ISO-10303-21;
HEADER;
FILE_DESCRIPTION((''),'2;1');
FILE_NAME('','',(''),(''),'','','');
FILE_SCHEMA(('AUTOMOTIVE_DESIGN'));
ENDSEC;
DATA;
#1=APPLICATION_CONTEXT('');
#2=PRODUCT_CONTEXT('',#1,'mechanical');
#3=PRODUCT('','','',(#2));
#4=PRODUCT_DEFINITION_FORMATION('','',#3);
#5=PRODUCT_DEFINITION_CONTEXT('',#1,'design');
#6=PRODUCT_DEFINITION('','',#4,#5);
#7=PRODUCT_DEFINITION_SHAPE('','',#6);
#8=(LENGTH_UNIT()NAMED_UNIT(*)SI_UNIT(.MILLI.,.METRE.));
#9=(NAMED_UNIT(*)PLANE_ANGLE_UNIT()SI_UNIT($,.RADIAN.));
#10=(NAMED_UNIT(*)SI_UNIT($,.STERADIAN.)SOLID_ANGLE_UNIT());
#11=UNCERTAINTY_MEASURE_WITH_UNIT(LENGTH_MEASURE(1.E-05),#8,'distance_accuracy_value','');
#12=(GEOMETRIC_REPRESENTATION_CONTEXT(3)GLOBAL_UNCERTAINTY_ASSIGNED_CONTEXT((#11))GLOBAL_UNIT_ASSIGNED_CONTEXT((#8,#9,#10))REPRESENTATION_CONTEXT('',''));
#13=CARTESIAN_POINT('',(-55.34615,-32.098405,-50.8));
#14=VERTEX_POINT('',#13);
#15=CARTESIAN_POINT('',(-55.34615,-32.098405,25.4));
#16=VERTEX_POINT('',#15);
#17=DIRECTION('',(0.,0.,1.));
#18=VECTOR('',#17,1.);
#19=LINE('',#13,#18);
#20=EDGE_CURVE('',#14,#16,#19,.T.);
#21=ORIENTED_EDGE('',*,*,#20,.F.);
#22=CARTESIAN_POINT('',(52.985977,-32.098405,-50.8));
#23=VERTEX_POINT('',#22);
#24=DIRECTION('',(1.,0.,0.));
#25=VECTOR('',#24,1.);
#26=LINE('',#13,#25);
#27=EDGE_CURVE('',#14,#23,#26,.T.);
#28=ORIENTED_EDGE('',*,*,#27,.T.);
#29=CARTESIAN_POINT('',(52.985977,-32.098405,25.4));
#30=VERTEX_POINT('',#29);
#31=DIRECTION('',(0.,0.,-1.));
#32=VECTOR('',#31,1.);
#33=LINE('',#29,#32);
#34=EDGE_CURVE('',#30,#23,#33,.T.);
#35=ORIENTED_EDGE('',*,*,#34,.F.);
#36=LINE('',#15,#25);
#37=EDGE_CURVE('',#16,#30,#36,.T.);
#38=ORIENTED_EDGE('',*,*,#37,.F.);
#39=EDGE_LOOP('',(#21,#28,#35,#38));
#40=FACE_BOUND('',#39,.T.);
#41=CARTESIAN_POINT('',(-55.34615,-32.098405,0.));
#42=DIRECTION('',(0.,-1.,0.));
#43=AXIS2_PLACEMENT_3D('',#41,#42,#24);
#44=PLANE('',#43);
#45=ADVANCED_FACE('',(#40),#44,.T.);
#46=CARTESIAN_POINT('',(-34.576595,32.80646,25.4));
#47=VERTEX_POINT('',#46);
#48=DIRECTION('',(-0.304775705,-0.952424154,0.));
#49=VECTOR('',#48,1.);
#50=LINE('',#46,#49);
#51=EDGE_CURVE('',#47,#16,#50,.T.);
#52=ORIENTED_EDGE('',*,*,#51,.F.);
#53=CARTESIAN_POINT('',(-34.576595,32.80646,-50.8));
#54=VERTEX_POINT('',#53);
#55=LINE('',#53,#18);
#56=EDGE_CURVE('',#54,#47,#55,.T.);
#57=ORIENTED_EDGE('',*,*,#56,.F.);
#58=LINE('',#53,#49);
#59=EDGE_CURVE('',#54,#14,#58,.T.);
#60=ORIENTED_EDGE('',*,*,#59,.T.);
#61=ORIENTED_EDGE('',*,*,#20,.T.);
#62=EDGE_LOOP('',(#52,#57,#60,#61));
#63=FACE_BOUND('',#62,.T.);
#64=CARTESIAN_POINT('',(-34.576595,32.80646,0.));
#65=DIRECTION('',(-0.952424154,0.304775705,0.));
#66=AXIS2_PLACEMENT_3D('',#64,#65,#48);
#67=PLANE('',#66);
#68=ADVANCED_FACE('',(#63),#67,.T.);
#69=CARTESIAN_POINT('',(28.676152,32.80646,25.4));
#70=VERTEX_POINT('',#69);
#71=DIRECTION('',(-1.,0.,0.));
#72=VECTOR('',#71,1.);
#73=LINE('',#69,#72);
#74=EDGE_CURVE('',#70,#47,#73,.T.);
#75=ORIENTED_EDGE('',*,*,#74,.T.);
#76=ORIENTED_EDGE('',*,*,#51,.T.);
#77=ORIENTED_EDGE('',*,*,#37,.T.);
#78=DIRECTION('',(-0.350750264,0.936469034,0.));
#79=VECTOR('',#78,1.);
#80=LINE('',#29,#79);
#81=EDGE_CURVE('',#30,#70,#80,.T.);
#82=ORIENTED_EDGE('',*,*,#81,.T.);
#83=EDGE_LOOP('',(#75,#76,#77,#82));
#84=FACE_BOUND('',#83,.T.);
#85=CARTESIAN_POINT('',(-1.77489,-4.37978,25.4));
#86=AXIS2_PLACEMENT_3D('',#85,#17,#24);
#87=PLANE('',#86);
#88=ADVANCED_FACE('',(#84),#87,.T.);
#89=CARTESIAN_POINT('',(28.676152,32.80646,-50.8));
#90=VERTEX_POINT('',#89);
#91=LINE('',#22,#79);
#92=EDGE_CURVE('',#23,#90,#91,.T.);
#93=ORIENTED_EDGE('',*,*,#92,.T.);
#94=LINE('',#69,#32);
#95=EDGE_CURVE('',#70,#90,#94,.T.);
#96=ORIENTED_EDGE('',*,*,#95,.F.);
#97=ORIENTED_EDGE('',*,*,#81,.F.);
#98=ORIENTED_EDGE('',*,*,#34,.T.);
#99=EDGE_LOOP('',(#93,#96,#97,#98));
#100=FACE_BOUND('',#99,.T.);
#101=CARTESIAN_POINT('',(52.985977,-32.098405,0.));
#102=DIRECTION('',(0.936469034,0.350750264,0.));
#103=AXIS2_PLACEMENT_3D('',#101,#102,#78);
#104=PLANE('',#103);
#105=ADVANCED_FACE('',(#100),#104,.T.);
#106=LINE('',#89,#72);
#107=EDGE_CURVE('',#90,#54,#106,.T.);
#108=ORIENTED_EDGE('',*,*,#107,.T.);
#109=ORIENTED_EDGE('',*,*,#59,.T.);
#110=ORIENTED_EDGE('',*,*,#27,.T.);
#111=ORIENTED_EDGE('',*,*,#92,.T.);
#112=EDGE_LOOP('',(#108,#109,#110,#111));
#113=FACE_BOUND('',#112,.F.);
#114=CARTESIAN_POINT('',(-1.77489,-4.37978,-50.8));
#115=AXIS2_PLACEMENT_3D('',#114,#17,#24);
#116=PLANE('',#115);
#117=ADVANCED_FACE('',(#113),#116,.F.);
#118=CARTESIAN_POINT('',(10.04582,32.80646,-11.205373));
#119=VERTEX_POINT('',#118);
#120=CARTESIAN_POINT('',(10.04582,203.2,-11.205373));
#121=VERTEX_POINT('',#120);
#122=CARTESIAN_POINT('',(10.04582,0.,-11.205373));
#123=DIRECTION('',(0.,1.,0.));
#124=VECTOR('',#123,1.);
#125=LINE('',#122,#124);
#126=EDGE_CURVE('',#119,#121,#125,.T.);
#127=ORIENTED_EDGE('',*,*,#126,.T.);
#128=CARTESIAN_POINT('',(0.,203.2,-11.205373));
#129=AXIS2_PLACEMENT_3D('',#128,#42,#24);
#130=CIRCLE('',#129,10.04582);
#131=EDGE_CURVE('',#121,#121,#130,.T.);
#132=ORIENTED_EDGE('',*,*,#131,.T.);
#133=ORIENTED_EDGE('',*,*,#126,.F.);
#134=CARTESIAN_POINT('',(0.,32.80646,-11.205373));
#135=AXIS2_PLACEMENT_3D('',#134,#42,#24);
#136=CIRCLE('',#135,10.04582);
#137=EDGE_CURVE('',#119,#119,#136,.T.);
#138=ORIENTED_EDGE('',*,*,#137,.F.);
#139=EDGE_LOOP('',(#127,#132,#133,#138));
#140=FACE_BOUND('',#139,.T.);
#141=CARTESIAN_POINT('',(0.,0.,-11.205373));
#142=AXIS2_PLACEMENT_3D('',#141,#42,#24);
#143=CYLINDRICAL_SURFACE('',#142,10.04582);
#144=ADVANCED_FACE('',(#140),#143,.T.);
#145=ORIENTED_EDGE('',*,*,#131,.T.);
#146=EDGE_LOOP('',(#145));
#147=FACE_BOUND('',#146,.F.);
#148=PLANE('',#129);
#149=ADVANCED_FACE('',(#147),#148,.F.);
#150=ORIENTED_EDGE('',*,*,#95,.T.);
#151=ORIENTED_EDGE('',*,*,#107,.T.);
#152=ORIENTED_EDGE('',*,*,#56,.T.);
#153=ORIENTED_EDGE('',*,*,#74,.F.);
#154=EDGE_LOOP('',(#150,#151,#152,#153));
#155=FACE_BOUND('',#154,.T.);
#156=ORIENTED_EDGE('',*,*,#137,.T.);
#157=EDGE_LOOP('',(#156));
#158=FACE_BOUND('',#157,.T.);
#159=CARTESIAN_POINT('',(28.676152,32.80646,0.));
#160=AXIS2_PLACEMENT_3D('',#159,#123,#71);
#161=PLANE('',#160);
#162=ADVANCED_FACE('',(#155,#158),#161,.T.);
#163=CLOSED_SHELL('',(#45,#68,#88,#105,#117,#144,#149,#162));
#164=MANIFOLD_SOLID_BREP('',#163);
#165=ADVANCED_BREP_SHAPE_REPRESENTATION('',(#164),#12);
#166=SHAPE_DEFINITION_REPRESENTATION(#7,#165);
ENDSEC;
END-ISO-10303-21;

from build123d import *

# Parameters (mm, degrees)
F1_DEPTH = 25.4
F2_DEPTH = 50.8
F3_R     = 10.0458196752
F4_DEPTH = 203.2


# Not quite as in the source:
# - the program builds the solid bodies; features that only make, move or delete a surface that nothing else refers to are left out


with BuildPart() as f1:
    # F0 (on Top) → F1 (new body)
    with BuildSketch(Plane.XY):
        Polygon((28.6761522293, 32.8064598143), (-34.5765948296, 32.8064598143), (-55.3461499512, -32.0984050632), (52.9859773815, -32.0984050632), align=None)
    extrude(amount=F1_DEPTH)

    # F2 (add): a face of the model
    f2_faces = [f1.faces().sort_by_distance(p)[0] for p in [
        (-1.9876444454, -2.4879782653, 0),
    ]]
    extrude(f2_faces, amount=F2_DEPTH)

    # F3 (on Front) → F4 (join)
    with BuildSketch(Plane.XZ):
        with Locations((0, -11.2053733319)):
            Circle(F3_R)
    extrude(amount=-F4_DEPTH)


solid = f1.part
